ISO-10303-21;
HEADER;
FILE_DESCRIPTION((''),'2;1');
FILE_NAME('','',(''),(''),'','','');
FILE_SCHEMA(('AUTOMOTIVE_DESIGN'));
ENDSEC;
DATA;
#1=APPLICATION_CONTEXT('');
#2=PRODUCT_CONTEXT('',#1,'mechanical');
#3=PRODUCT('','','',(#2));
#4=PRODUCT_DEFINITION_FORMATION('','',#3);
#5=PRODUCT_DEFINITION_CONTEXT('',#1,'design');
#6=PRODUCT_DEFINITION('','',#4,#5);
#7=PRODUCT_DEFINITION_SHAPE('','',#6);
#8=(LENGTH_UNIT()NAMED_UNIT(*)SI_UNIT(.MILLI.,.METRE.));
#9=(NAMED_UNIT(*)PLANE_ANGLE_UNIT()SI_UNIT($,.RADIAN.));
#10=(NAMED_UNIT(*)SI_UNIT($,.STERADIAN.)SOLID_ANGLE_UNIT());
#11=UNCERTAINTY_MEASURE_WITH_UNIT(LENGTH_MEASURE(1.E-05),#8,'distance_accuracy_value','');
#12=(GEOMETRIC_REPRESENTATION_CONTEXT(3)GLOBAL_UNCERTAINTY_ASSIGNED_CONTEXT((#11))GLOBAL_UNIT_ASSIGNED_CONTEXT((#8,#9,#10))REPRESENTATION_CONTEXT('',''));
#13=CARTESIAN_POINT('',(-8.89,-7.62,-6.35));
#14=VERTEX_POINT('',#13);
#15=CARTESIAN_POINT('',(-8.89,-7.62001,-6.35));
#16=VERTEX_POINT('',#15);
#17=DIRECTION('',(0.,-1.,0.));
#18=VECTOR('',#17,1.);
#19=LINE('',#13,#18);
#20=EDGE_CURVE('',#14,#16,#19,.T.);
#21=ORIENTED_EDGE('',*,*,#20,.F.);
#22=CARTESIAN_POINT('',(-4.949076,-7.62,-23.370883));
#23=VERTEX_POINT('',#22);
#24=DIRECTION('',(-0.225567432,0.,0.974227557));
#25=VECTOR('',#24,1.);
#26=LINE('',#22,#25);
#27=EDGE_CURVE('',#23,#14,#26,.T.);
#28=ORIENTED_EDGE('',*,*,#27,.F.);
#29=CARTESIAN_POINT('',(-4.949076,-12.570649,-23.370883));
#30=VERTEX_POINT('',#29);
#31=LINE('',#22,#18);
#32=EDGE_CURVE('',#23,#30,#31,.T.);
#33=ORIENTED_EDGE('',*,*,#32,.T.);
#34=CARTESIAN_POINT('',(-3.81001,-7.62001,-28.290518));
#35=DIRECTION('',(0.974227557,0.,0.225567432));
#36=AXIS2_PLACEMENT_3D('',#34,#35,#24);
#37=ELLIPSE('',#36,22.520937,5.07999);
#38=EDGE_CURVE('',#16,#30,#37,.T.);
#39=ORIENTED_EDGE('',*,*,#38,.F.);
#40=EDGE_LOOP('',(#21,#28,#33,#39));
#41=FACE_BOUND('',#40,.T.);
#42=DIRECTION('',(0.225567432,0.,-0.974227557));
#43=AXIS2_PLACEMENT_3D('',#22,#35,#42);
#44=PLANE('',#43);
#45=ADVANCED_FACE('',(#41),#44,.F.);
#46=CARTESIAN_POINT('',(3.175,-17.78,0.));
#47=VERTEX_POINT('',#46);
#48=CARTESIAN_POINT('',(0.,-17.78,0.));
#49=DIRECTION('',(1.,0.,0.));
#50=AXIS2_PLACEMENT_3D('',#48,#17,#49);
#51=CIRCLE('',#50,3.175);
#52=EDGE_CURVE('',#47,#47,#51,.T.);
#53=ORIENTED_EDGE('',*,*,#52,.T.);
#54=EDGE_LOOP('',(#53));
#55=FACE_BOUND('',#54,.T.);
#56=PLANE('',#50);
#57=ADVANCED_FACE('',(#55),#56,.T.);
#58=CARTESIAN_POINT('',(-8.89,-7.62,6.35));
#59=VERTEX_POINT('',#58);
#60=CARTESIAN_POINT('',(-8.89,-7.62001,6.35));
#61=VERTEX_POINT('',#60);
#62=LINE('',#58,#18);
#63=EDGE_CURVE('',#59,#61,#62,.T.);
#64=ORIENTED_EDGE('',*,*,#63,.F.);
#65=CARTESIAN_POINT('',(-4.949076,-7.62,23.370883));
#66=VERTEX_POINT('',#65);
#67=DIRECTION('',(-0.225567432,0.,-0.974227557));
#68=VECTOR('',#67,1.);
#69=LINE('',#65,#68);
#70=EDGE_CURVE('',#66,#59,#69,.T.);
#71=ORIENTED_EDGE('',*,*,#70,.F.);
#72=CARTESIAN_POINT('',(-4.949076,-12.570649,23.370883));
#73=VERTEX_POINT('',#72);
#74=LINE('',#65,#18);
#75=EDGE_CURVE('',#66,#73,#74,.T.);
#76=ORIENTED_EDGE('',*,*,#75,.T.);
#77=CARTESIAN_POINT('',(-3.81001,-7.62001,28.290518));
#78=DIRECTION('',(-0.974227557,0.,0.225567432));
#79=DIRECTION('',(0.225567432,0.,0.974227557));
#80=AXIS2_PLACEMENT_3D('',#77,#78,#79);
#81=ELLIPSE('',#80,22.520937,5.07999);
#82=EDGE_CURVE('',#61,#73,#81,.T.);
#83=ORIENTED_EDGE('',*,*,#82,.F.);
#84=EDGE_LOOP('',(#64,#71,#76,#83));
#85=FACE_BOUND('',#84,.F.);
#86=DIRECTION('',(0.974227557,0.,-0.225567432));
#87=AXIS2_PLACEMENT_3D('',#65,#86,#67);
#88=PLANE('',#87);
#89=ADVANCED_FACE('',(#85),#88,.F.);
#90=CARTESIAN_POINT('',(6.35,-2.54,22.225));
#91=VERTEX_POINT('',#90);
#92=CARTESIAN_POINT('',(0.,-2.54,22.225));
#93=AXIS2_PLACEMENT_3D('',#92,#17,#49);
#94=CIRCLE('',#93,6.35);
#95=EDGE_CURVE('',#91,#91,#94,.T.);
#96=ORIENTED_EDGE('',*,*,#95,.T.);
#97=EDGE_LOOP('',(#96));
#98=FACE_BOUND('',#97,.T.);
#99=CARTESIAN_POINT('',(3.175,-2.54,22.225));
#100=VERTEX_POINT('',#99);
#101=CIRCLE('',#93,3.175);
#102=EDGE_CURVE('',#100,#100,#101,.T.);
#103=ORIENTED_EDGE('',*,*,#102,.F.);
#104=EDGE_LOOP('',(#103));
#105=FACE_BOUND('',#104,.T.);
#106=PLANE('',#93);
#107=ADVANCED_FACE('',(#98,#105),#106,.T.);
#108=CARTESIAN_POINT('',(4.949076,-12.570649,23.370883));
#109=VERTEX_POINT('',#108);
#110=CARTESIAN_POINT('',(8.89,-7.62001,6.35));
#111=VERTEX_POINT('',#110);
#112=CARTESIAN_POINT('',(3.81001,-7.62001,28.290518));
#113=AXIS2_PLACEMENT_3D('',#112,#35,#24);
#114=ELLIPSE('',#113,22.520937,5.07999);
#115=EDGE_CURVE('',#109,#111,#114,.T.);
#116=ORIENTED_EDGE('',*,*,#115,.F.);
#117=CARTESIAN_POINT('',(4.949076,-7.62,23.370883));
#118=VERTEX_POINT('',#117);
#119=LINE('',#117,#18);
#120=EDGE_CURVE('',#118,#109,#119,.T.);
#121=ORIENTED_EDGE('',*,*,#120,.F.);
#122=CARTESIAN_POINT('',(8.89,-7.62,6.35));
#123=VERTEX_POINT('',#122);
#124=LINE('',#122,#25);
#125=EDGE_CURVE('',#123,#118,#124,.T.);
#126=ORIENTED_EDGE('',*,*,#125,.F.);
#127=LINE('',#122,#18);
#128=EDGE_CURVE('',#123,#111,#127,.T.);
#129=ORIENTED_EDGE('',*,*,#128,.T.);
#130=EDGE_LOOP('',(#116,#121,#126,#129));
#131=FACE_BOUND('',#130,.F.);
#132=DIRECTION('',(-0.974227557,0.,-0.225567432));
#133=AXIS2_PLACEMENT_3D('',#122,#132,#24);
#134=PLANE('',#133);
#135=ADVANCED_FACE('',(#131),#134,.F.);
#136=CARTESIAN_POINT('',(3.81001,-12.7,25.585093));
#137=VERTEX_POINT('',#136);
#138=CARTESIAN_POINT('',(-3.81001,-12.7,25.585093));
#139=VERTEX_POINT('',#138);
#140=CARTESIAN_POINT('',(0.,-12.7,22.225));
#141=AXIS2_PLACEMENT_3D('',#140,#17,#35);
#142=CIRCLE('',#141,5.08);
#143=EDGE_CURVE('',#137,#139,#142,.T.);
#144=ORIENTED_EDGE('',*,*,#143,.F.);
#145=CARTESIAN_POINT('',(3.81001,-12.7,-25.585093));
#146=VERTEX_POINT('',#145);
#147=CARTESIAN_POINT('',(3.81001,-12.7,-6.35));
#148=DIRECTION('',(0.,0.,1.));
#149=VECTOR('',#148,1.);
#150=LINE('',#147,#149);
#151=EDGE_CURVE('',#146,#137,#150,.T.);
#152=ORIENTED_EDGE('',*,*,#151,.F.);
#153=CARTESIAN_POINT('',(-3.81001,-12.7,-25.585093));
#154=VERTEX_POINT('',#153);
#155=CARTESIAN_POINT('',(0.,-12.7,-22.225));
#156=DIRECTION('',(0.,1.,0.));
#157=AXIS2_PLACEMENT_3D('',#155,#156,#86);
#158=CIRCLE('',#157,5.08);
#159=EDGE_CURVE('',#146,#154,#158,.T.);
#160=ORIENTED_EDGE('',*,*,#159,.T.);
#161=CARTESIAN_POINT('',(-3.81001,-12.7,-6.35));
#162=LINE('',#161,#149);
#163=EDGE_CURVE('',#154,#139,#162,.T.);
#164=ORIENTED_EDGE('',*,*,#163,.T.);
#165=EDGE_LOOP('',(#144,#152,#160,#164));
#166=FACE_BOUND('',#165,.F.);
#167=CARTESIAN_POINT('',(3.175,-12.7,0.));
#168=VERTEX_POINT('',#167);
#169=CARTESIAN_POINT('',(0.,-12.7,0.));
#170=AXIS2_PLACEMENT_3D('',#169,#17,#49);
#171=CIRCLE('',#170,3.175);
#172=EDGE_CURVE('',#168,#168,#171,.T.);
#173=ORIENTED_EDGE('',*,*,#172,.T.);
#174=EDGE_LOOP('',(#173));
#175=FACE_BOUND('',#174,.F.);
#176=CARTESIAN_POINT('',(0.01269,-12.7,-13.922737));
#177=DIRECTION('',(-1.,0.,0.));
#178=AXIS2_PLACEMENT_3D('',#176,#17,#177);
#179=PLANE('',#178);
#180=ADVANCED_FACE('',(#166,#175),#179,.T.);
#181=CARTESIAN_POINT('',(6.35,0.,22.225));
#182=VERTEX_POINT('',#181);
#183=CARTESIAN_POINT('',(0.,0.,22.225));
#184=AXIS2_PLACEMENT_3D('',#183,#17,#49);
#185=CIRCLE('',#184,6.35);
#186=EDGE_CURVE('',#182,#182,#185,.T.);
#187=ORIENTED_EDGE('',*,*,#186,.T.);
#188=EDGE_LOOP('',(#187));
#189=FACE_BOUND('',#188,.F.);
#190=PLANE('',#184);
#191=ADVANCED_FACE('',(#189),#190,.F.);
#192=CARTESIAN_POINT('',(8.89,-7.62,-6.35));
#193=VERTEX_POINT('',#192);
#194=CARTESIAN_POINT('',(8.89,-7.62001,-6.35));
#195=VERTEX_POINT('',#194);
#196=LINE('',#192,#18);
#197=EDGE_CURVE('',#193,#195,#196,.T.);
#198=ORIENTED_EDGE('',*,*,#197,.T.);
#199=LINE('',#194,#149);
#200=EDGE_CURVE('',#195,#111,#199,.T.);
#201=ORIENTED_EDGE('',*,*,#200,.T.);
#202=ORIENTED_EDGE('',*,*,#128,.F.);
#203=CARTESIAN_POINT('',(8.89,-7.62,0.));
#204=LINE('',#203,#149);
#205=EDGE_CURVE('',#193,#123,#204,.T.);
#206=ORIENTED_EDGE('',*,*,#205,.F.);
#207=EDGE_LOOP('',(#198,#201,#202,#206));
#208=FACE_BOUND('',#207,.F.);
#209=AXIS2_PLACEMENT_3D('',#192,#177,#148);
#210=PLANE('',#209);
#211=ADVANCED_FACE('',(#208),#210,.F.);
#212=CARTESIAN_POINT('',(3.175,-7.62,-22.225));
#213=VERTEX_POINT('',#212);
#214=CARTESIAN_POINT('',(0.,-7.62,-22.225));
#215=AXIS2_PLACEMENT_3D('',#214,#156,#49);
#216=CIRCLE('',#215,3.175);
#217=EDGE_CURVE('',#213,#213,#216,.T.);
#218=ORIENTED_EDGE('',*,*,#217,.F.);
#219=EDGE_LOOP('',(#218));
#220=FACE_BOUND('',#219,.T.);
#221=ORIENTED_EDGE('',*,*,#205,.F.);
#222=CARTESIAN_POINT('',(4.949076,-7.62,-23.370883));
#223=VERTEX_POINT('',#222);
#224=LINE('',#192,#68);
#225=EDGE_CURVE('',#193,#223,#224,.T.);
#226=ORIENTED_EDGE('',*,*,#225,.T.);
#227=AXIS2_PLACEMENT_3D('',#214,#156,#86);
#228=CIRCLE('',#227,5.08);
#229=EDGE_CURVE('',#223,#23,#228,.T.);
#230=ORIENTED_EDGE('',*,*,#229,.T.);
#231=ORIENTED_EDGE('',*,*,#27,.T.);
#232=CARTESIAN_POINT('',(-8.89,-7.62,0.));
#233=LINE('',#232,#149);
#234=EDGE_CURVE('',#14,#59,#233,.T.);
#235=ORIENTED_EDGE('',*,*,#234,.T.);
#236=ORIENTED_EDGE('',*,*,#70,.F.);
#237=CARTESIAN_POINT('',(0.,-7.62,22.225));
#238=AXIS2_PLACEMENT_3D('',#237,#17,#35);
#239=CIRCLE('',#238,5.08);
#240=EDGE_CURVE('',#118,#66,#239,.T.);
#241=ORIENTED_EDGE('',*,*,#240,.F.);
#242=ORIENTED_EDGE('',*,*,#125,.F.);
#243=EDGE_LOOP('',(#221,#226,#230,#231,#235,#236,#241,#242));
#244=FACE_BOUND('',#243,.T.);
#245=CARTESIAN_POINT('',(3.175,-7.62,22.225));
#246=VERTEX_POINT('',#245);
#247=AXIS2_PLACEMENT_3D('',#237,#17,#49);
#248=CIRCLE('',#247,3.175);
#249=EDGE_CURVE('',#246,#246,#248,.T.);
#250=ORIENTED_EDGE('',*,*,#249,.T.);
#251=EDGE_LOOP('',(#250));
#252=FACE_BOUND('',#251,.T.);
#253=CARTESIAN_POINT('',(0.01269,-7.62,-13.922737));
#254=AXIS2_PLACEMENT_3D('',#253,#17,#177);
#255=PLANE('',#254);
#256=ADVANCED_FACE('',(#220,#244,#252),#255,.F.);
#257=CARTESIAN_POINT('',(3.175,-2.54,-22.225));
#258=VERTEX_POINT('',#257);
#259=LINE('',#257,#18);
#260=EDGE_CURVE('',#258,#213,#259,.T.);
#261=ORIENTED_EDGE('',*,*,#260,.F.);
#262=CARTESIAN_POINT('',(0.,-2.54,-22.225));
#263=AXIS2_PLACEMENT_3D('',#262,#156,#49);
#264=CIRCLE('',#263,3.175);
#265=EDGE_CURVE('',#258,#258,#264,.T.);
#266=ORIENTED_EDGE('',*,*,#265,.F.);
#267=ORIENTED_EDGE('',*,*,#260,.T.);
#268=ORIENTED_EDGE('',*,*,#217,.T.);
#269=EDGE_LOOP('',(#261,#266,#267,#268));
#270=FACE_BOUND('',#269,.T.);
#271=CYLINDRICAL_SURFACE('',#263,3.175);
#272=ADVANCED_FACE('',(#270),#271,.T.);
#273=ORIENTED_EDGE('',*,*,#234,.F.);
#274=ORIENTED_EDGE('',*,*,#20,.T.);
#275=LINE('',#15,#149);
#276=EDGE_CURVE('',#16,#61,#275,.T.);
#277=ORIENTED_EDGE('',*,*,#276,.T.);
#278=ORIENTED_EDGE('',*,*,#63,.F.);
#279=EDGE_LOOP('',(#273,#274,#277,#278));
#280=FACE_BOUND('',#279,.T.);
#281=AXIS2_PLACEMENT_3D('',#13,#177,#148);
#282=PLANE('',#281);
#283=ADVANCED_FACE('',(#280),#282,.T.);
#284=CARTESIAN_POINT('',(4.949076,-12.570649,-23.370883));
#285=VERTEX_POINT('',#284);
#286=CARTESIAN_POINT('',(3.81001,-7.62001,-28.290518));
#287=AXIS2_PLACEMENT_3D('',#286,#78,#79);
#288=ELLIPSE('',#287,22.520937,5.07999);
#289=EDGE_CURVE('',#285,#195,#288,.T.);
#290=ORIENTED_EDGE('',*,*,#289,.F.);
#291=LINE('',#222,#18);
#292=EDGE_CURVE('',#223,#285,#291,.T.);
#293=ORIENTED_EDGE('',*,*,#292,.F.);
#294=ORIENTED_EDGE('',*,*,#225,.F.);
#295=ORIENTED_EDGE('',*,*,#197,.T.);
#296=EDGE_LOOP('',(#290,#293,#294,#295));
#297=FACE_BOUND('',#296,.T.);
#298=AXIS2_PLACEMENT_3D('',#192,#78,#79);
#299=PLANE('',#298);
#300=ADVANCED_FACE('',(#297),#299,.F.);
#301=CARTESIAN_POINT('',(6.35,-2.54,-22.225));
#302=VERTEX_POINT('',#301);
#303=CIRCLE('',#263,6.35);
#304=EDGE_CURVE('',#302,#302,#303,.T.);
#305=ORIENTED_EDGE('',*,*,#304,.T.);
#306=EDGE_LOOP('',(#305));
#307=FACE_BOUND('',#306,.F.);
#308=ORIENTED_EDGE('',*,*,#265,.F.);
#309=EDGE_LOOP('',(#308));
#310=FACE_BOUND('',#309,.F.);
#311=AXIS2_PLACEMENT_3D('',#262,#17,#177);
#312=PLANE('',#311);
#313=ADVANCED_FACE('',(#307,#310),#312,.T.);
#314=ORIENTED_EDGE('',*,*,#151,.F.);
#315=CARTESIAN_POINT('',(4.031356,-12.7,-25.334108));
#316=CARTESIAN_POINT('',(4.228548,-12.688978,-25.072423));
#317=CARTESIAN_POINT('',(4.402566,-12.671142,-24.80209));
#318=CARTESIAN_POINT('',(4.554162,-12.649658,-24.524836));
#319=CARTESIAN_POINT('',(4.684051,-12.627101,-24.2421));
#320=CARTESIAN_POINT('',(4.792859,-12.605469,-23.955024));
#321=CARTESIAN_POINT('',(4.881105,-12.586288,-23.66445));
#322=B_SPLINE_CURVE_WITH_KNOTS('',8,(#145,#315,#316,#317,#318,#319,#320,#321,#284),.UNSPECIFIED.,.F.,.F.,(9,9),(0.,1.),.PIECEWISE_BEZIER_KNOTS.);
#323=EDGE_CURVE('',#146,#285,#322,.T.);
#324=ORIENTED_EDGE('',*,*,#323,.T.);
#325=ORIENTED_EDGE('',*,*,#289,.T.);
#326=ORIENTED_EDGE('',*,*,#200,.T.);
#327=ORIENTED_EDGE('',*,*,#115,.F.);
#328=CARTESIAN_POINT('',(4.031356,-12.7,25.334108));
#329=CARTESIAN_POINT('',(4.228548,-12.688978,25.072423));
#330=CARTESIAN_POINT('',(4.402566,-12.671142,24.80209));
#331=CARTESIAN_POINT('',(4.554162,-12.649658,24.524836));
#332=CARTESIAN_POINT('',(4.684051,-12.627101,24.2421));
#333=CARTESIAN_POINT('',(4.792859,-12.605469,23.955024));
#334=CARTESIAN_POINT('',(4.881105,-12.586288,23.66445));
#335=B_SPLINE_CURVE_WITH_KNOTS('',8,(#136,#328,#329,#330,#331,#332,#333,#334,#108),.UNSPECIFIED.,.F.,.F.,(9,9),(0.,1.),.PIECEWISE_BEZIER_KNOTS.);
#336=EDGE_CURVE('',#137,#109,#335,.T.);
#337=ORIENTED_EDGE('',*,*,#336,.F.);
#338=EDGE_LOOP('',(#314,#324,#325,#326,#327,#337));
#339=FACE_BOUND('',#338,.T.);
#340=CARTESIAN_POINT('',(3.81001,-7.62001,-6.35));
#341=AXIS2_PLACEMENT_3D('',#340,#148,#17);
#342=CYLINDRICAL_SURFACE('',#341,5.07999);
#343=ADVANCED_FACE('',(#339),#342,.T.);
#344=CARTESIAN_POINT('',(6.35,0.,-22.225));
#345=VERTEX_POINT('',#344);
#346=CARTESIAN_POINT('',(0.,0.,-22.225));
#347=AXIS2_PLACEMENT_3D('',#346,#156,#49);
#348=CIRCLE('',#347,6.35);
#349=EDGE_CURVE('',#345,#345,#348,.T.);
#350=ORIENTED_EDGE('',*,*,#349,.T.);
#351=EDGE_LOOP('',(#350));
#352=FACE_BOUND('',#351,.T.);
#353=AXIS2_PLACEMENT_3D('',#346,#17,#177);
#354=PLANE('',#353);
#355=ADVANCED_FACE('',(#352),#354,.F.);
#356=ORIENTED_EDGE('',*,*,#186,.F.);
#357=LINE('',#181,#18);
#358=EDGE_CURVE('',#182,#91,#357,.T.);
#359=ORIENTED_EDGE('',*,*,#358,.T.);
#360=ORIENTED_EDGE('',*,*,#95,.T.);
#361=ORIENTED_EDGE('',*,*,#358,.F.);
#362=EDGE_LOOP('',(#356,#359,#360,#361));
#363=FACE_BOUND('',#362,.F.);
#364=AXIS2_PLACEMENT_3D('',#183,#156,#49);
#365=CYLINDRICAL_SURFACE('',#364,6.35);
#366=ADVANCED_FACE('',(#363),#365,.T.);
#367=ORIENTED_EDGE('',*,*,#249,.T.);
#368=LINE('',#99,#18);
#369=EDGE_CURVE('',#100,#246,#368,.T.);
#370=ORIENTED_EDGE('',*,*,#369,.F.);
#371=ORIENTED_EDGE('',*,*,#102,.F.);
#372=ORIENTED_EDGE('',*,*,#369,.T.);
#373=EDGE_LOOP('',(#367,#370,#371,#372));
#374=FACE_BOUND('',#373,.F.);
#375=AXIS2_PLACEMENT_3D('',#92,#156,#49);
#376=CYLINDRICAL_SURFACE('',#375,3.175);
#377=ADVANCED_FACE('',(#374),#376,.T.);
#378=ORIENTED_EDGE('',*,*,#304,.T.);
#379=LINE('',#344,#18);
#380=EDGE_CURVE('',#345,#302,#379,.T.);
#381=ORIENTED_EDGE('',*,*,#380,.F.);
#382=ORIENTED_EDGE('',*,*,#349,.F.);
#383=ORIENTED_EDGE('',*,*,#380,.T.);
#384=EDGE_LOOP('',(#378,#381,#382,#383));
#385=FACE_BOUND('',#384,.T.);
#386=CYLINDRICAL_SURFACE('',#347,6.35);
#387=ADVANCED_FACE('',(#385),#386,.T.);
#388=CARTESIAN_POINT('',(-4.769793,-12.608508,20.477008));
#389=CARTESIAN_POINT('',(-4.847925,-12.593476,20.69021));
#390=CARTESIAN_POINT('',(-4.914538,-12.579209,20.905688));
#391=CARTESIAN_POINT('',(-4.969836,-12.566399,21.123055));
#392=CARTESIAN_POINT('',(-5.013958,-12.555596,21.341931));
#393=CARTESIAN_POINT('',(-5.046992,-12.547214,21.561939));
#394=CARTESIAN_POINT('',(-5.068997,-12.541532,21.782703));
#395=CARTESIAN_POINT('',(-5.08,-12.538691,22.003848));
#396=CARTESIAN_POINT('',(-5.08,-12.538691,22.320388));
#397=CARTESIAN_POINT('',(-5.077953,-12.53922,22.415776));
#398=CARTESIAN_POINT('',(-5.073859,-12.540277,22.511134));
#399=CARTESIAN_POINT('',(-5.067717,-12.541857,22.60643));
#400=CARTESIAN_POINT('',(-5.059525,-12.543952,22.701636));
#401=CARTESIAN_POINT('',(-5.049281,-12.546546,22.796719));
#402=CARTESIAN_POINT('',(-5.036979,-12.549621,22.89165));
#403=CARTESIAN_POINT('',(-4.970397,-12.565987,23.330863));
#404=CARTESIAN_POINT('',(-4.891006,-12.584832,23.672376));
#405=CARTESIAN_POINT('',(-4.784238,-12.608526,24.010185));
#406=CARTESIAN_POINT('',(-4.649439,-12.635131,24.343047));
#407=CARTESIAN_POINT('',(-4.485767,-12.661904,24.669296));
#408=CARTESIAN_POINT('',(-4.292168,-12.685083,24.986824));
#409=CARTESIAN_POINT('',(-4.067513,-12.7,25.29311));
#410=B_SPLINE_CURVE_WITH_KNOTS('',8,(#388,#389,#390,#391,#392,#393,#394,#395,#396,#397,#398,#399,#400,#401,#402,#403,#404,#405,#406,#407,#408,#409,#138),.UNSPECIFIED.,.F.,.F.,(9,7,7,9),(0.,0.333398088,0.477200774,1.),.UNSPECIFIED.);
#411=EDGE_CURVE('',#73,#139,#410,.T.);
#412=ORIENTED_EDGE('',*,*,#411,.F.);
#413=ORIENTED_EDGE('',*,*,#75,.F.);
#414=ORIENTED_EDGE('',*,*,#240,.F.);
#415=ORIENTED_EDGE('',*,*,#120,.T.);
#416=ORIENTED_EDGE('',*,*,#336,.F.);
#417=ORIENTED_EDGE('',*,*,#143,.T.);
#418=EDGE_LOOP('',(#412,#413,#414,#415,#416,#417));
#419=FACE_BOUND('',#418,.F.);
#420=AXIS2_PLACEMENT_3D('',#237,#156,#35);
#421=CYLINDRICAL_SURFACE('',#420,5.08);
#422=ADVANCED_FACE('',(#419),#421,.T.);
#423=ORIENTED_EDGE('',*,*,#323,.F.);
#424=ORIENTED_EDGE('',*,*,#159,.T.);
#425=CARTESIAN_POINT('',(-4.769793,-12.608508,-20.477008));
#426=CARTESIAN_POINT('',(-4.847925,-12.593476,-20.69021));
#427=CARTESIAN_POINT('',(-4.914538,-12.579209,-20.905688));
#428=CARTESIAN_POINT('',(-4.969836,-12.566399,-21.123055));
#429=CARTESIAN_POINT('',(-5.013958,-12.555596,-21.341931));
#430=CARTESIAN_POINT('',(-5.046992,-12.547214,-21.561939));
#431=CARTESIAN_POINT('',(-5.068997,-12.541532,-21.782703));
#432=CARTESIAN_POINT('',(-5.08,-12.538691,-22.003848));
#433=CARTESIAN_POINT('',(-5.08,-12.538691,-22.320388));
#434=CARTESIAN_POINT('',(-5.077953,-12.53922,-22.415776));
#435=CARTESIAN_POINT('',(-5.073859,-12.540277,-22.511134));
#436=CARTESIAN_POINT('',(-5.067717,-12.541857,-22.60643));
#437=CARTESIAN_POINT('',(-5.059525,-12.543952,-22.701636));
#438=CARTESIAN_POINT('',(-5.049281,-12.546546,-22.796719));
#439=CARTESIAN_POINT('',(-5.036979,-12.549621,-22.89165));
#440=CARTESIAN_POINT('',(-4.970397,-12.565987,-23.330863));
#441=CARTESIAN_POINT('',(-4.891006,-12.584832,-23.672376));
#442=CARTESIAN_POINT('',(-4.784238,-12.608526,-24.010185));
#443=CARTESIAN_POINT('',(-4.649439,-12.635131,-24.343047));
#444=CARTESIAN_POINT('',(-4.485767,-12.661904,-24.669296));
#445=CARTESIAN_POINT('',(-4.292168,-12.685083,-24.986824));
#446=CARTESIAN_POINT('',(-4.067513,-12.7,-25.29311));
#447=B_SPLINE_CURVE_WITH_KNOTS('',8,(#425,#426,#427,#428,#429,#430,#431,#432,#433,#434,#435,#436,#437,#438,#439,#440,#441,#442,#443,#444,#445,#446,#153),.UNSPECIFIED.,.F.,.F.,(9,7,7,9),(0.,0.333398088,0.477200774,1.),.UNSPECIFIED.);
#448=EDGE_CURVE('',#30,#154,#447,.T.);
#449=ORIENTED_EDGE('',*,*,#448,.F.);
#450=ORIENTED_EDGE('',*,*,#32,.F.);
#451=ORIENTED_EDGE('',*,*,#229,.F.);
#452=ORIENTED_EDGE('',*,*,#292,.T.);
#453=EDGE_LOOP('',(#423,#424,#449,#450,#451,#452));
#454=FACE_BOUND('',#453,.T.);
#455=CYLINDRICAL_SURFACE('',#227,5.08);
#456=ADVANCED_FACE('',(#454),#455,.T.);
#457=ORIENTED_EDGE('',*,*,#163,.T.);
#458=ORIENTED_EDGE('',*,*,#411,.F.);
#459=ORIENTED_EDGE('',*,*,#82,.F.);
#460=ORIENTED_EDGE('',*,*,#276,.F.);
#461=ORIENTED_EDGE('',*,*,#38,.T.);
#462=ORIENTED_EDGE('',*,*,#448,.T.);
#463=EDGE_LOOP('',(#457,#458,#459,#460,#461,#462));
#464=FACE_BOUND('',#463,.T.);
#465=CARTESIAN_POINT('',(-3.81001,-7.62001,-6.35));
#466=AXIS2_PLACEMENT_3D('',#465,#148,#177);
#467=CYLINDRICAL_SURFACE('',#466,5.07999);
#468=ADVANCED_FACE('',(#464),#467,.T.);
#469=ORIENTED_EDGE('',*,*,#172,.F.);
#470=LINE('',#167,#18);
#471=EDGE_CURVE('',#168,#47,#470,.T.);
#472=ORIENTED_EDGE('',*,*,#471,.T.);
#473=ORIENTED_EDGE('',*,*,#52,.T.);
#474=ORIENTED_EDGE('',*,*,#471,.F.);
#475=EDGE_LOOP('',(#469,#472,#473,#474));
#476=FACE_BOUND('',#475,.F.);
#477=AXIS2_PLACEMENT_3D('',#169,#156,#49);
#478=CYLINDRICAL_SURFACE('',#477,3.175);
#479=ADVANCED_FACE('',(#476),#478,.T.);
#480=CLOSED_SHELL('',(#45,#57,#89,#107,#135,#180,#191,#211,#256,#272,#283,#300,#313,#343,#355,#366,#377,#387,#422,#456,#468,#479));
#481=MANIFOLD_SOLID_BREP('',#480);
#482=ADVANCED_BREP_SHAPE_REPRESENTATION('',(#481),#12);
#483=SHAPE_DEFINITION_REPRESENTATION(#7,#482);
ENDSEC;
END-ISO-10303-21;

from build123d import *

# Parameters (mm, degrees)
F0_R     = 6.35
F1_DEPTH = 2.54
F2_R     = 3.175
F3_DEPTH = 5.08
F4_R     = 3.175
F4_W     = 17.78
F4_H     = 12.7
F5_DEPTH = 5.08
F7_R     = 5.07999
F8_R     = 3.175
F9_DEPTH = 5.08


# Not quite as in the source:
# - a fillet or chamfer is up to 0.001 mm smaller than in the source, because OpenCascade refuses the exact size


with BuildPart() as f1:
    # F0 (on Front) → F1 (new body)
    with BuildSketch(Plane.XZ):
        with Locations((0, 22.225)):
            Circle(F0_R)
    extrude(amount=F1_DEPTH)

    # F2 (on face) → F3 (join)
    with BuildSketch(Plane.XZ.offset(2.54)):
        with Locations((0, 22.225)):
            Circle(F2_R)
    extrude(amount=F3_DEPTH)

    # F4 (on face) → F5 (join)
    with BuildSketch(Plane.XZ.offset(7.62)):
        with BuildLine():
            ThreePointArc((4.9490759915, 23.3708825552), (5.0471628682, 22.8016688665), (5.08, 22.225))
            ThreePointArc((5.08, 22.225), (-0.5766688665, 17.1778371318), (-4.9490759915, 23.3708825552))
            Line((-4.9490759915, 23.3708825552), (-8.89, 6.35))
            Line((-8.89, 6.35), (8.89, 6.35))
            Line((8.89, 6.35), (4.9490759915, 23.3708825552))
        make_face()
        with BuildLine():
            ThreePointArc((-4.9490759915, 23.3708825552), (-0.5766688665, 17.1778371318), (5.08, 22.225))
            ThreePointArc((5.08, 22.225), (5.0471628682, 22.8016688665), (4.9490759915, 23.3708825552))
            ThreePointArc((4.9490759915, 23.3708825552), (0, 27.305), (-4.9490759915, 23.3708825552))
        make_face()
        with Locations((0, 22.225)):
            Circle(F4_R, mode=Mode.SUBTRACT)
        with Locations((0, 22.225)):
            Circle(F4_R)
        Rectangle(F4_W, F4_H)
    extrude(amount=F5_DEPTH)

    # F6: F1 across plane


with BuildPart() as f1_1:
    add(f1.part)
    add(f1.part.mirror(Plane.XY))

    # F7 (radius 5.08 in the source; OpenCascade refuses exactly that, so slightly less here)
    f7_edges = [f1_1.edges().sort_by_distance(p)[0] for p in [
        (-8.89, -12.7, 0),
        (8.89, -12.7, 0),
    ]]
    fillet(f7_edges, radius=F7_R)

    # F8 (on face) → F9 (join)
    with BuildSketch(Plane.XZ.offset(12.7)):
        Circle(F8_R)
    extrude(amount=F9_DEPTH)


solid = f1_1.part
